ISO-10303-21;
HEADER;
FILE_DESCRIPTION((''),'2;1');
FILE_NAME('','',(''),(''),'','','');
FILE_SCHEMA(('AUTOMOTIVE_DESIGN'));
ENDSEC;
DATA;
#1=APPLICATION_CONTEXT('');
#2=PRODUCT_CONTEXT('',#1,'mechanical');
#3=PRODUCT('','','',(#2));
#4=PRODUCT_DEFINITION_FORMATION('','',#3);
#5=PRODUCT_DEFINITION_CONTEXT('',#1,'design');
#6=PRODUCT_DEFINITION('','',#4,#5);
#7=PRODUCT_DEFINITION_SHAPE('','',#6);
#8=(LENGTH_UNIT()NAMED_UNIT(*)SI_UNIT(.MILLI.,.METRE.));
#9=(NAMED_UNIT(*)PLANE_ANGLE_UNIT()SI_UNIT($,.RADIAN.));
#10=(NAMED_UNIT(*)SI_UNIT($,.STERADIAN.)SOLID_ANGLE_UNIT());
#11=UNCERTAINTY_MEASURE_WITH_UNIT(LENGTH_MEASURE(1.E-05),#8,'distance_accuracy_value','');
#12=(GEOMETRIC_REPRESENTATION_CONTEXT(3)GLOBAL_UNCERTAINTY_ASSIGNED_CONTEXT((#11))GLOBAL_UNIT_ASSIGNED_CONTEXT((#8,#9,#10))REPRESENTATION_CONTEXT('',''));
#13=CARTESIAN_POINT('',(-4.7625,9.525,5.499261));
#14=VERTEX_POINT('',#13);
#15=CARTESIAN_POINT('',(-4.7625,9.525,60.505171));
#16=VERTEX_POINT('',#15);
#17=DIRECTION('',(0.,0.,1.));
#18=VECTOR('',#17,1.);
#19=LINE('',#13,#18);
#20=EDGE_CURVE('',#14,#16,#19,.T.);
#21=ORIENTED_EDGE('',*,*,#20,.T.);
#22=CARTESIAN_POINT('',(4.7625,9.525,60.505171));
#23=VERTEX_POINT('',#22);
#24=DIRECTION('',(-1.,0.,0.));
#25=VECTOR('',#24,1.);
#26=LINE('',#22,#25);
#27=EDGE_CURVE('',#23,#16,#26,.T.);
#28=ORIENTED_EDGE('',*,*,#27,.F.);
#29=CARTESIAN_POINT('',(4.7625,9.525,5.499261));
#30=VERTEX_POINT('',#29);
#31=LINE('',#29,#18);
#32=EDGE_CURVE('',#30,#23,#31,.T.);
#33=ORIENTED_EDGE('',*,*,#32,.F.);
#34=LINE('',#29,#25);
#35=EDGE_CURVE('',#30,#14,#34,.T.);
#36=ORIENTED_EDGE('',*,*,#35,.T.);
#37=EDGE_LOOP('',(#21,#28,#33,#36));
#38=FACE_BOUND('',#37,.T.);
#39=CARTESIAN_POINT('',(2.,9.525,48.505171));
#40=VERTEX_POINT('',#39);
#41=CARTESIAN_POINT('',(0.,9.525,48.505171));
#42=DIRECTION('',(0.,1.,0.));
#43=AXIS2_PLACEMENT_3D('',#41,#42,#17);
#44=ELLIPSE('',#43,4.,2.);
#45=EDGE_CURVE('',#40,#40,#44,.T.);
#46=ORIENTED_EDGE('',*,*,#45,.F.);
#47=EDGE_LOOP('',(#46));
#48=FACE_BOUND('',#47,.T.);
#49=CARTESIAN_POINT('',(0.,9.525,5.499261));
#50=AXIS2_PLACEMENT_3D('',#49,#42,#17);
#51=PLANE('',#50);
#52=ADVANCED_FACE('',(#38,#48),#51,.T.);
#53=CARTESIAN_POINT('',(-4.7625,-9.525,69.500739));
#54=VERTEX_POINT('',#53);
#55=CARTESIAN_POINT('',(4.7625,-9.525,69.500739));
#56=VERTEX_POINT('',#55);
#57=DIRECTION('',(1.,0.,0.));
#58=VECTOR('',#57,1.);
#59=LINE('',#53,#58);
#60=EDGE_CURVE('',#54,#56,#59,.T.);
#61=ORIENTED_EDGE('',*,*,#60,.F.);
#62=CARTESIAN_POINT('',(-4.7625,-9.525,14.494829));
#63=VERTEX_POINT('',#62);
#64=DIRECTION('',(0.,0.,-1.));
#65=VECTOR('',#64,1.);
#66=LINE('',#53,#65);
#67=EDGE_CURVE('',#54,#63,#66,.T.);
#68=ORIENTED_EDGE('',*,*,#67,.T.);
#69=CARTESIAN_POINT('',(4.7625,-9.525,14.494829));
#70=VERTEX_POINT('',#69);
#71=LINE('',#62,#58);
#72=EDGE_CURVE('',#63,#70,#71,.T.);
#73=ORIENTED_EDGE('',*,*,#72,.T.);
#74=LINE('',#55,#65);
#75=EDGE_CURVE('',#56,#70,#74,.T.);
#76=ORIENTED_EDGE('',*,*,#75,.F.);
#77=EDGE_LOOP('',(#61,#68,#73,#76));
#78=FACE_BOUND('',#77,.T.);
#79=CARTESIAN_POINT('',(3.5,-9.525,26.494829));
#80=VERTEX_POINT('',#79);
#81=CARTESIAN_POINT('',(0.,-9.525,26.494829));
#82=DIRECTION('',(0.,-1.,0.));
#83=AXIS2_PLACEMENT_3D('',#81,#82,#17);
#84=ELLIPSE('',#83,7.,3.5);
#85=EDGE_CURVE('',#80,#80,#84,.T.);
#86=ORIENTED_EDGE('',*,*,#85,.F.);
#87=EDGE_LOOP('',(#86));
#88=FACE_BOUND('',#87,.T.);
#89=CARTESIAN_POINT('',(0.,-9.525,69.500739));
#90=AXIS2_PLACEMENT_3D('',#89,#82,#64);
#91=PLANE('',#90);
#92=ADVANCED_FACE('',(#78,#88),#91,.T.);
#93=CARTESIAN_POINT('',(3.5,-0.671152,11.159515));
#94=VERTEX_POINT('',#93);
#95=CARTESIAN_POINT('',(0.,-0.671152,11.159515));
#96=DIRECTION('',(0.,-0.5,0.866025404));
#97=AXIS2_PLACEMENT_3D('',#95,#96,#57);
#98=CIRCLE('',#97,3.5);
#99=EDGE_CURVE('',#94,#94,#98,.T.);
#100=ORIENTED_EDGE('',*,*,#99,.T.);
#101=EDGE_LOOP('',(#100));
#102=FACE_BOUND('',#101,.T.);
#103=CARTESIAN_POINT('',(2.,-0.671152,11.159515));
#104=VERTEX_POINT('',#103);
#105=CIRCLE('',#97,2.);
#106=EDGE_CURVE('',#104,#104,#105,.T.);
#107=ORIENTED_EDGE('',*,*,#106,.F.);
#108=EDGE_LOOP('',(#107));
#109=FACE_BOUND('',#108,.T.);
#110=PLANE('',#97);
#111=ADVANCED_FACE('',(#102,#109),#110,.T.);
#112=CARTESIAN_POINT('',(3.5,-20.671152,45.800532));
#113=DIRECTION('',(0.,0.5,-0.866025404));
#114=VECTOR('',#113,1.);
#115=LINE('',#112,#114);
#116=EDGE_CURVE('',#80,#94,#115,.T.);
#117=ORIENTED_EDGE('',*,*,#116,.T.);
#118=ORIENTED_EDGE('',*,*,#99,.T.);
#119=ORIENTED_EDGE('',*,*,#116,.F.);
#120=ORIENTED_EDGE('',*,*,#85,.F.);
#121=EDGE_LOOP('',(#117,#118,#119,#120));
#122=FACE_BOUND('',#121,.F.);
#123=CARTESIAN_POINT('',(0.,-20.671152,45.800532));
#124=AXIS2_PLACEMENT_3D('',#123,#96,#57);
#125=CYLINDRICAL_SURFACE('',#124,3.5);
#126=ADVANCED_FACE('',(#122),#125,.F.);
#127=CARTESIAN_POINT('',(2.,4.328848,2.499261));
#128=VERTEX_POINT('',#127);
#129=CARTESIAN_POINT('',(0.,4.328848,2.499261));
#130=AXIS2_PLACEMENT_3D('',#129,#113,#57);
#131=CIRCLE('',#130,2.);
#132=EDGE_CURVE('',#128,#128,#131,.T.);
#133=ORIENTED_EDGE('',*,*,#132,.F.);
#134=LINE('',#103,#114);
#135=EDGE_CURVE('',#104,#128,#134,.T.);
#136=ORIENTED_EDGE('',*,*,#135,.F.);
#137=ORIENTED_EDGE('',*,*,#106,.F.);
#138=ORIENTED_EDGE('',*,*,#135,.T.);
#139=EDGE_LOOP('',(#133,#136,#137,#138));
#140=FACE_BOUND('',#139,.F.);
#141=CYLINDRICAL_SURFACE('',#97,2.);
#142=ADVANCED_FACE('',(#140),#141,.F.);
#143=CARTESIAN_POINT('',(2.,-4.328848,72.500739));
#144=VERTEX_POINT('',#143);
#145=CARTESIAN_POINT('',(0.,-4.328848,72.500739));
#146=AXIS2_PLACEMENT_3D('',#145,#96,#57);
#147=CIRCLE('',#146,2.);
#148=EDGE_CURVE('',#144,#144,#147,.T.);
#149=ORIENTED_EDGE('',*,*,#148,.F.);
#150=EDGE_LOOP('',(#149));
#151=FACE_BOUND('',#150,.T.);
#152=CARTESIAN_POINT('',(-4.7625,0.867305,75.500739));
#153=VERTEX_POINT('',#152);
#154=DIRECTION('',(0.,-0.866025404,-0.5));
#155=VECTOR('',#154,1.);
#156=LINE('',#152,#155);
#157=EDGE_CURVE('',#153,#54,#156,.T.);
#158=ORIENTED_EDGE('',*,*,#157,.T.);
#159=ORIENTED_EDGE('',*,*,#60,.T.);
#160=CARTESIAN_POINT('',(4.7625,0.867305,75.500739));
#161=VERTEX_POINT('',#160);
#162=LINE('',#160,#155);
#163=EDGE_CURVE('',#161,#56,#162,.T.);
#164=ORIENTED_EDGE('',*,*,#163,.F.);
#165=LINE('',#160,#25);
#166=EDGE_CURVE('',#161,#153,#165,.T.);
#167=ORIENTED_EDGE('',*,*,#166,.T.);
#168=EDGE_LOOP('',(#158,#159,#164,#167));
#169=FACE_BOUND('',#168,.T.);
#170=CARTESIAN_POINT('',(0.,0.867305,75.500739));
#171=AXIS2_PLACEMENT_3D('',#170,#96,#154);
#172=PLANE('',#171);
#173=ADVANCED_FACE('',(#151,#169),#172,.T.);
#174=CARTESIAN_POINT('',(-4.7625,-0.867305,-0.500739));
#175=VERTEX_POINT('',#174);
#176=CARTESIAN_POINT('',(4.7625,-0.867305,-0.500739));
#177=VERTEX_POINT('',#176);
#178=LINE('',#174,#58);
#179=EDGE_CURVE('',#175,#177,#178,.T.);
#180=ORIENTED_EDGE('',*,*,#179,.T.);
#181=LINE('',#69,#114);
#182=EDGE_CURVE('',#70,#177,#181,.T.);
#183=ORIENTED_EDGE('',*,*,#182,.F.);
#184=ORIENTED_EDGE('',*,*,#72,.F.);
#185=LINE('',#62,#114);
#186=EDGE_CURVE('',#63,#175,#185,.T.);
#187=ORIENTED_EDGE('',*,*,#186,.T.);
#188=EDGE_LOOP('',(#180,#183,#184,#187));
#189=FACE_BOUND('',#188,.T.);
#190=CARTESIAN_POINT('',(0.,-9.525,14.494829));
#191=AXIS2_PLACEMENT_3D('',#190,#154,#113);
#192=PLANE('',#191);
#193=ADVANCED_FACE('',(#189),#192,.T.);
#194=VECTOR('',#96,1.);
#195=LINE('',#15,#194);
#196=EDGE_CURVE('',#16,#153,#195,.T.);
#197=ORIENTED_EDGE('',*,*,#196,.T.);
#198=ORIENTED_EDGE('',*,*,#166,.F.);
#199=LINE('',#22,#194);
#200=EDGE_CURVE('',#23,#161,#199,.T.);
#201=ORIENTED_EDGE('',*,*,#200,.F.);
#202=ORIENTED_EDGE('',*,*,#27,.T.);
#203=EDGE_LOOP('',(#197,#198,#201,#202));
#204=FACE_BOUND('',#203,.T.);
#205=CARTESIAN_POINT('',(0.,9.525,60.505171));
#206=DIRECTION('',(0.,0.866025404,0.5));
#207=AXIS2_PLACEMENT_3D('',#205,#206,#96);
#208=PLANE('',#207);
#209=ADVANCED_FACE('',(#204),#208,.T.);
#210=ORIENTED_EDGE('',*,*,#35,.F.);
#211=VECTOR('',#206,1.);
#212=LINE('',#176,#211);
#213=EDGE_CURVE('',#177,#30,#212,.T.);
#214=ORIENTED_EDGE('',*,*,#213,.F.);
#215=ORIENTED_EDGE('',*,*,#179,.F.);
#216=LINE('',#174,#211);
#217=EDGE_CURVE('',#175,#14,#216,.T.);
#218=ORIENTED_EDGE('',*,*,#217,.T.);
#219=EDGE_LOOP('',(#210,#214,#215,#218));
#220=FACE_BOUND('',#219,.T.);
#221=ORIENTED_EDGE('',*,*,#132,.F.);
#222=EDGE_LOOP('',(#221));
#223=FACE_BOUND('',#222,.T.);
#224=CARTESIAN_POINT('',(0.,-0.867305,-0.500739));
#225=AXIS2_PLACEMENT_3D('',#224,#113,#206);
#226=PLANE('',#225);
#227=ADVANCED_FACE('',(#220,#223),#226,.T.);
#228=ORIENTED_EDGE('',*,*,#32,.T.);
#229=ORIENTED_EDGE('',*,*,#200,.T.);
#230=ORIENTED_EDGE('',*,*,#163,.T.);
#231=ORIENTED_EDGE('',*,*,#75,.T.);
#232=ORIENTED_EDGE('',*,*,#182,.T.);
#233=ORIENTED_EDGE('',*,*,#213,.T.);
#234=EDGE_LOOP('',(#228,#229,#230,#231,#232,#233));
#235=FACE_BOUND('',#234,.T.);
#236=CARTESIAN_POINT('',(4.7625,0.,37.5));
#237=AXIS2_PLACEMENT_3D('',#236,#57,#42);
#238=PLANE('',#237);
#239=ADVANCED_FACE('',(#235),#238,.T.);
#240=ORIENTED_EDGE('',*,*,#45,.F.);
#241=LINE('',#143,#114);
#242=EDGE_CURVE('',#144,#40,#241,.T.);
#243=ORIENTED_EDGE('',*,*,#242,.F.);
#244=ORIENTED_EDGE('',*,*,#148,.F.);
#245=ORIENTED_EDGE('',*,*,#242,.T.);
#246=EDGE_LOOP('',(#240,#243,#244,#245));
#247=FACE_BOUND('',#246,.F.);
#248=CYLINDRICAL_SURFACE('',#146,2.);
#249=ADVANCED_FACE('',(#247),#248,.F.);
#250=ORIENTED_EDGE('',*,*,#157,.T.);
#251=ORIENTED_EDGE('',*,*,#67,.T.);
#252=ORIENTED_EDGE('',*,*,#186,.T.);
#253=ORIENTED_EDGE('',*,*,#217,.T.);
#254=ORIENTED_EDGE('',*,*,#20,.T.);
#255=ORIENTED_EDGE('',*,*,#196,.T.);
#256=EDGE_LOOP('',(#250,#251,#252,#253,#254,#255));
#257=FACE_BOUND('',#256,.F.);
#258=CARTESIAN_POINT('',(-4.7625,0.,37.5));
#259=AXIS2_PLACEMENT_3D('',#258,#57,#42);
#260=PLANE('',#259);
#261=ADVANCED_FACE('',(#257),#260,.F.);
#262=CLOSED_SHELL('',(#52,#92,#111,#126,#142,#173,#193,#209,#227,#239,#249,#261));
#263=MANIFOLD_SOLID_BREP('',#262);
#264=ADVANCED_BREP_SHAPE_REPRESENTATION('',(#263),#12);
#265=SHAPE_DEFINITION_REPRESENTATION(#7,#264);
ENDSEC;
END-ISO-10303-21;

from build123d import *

# Parameters (mm, degrees)
F1_DEPTH = 4.7625
F2_R     = 2
F3_DEPTH = 50
F4_R     = 3.5
F4_R_2   = 2
F5_DEPTH = 40
F6_R     = 2
F7_DEPTH = 15.1971524227
F8_R     = 2
F9_DEPTH = 70.1490577065


# Not quite as in the source:
# - a length typed as a fraction of an inch, garbled in the dataset ("3 / 203.2 mm" for 3/8 in), is restored


with BuildPart() as f1:
    # F0 (on Right) → F1 (new body, symmetric)
    with BuildSketch(Plane.YZ):
        Polygon((0.8673048454, 75.500738686), (-9.525, 69.500738686), (-9.525, 14.4948291982), (-0.8673048454, -0.500738686), (9.525, 5.499261314), (9.525, 60.5051708018), align=None)
    extrude(amount=F1_DEPTH, both=True)

    # F2 (on face) → F3 (join)
    with BuildSketch(Plane(origin=(0, 0, 0), x_dir=(1, 0, 0), z_dir=(0, 0.5, -0.8660254038))):
        with Locations((0, -4.9985226281)):
            Circle(F2_R)
    extrude(amount=-F3_DEPTH)

    # F4 (on face) → F5 (cut)
    with BuildSketch(Plane(origin=(0, -25, 43.3012701892), x_dir=(1, 0, 0), z_dir=(0, -0.5, 0.8660254038))):
        with Locations((0, 4.9985226281)):
            Circle(F4_R)
        with Locations((0, 4.9985226281)):
            Circle(F4_R_2, mode=Mode.SUBTRACT)
        with Locations((0, 4.9985226281)):
            Circle(F4_R_2)
    extrude(amount=-F5_DEPTH, mode=Mode.SUBTRACT)

    # F6 (on face) → F7 (cut, through all)
    with BuildSketch(Plane(origin=(0, -5, 8.6602540378), x_dir=(1, 0, 0), z_dir=(0, -0.5, 0.8660254038))):
        with Locations((0, 4.9985226281)):
            Circle(F6_R)
    extrude(amount=-F7_DEPTH, mode=Mode.SUBTRACT)

    # F8 (on face) → F9 (cut, through all)
    with BuildSketch(Plane(origin=(0, -32.4759526419, 56.25), x_dir=(1, 0, 0), z_dir=(0, -0.5, 0.8660254038))):
        with Locations((0, 32.5014773719)):
            Circle(F8_R)
    extrude(amount=-F9_DEPTH, mode=Mode.SUBTRACT)


solid = f1.part
